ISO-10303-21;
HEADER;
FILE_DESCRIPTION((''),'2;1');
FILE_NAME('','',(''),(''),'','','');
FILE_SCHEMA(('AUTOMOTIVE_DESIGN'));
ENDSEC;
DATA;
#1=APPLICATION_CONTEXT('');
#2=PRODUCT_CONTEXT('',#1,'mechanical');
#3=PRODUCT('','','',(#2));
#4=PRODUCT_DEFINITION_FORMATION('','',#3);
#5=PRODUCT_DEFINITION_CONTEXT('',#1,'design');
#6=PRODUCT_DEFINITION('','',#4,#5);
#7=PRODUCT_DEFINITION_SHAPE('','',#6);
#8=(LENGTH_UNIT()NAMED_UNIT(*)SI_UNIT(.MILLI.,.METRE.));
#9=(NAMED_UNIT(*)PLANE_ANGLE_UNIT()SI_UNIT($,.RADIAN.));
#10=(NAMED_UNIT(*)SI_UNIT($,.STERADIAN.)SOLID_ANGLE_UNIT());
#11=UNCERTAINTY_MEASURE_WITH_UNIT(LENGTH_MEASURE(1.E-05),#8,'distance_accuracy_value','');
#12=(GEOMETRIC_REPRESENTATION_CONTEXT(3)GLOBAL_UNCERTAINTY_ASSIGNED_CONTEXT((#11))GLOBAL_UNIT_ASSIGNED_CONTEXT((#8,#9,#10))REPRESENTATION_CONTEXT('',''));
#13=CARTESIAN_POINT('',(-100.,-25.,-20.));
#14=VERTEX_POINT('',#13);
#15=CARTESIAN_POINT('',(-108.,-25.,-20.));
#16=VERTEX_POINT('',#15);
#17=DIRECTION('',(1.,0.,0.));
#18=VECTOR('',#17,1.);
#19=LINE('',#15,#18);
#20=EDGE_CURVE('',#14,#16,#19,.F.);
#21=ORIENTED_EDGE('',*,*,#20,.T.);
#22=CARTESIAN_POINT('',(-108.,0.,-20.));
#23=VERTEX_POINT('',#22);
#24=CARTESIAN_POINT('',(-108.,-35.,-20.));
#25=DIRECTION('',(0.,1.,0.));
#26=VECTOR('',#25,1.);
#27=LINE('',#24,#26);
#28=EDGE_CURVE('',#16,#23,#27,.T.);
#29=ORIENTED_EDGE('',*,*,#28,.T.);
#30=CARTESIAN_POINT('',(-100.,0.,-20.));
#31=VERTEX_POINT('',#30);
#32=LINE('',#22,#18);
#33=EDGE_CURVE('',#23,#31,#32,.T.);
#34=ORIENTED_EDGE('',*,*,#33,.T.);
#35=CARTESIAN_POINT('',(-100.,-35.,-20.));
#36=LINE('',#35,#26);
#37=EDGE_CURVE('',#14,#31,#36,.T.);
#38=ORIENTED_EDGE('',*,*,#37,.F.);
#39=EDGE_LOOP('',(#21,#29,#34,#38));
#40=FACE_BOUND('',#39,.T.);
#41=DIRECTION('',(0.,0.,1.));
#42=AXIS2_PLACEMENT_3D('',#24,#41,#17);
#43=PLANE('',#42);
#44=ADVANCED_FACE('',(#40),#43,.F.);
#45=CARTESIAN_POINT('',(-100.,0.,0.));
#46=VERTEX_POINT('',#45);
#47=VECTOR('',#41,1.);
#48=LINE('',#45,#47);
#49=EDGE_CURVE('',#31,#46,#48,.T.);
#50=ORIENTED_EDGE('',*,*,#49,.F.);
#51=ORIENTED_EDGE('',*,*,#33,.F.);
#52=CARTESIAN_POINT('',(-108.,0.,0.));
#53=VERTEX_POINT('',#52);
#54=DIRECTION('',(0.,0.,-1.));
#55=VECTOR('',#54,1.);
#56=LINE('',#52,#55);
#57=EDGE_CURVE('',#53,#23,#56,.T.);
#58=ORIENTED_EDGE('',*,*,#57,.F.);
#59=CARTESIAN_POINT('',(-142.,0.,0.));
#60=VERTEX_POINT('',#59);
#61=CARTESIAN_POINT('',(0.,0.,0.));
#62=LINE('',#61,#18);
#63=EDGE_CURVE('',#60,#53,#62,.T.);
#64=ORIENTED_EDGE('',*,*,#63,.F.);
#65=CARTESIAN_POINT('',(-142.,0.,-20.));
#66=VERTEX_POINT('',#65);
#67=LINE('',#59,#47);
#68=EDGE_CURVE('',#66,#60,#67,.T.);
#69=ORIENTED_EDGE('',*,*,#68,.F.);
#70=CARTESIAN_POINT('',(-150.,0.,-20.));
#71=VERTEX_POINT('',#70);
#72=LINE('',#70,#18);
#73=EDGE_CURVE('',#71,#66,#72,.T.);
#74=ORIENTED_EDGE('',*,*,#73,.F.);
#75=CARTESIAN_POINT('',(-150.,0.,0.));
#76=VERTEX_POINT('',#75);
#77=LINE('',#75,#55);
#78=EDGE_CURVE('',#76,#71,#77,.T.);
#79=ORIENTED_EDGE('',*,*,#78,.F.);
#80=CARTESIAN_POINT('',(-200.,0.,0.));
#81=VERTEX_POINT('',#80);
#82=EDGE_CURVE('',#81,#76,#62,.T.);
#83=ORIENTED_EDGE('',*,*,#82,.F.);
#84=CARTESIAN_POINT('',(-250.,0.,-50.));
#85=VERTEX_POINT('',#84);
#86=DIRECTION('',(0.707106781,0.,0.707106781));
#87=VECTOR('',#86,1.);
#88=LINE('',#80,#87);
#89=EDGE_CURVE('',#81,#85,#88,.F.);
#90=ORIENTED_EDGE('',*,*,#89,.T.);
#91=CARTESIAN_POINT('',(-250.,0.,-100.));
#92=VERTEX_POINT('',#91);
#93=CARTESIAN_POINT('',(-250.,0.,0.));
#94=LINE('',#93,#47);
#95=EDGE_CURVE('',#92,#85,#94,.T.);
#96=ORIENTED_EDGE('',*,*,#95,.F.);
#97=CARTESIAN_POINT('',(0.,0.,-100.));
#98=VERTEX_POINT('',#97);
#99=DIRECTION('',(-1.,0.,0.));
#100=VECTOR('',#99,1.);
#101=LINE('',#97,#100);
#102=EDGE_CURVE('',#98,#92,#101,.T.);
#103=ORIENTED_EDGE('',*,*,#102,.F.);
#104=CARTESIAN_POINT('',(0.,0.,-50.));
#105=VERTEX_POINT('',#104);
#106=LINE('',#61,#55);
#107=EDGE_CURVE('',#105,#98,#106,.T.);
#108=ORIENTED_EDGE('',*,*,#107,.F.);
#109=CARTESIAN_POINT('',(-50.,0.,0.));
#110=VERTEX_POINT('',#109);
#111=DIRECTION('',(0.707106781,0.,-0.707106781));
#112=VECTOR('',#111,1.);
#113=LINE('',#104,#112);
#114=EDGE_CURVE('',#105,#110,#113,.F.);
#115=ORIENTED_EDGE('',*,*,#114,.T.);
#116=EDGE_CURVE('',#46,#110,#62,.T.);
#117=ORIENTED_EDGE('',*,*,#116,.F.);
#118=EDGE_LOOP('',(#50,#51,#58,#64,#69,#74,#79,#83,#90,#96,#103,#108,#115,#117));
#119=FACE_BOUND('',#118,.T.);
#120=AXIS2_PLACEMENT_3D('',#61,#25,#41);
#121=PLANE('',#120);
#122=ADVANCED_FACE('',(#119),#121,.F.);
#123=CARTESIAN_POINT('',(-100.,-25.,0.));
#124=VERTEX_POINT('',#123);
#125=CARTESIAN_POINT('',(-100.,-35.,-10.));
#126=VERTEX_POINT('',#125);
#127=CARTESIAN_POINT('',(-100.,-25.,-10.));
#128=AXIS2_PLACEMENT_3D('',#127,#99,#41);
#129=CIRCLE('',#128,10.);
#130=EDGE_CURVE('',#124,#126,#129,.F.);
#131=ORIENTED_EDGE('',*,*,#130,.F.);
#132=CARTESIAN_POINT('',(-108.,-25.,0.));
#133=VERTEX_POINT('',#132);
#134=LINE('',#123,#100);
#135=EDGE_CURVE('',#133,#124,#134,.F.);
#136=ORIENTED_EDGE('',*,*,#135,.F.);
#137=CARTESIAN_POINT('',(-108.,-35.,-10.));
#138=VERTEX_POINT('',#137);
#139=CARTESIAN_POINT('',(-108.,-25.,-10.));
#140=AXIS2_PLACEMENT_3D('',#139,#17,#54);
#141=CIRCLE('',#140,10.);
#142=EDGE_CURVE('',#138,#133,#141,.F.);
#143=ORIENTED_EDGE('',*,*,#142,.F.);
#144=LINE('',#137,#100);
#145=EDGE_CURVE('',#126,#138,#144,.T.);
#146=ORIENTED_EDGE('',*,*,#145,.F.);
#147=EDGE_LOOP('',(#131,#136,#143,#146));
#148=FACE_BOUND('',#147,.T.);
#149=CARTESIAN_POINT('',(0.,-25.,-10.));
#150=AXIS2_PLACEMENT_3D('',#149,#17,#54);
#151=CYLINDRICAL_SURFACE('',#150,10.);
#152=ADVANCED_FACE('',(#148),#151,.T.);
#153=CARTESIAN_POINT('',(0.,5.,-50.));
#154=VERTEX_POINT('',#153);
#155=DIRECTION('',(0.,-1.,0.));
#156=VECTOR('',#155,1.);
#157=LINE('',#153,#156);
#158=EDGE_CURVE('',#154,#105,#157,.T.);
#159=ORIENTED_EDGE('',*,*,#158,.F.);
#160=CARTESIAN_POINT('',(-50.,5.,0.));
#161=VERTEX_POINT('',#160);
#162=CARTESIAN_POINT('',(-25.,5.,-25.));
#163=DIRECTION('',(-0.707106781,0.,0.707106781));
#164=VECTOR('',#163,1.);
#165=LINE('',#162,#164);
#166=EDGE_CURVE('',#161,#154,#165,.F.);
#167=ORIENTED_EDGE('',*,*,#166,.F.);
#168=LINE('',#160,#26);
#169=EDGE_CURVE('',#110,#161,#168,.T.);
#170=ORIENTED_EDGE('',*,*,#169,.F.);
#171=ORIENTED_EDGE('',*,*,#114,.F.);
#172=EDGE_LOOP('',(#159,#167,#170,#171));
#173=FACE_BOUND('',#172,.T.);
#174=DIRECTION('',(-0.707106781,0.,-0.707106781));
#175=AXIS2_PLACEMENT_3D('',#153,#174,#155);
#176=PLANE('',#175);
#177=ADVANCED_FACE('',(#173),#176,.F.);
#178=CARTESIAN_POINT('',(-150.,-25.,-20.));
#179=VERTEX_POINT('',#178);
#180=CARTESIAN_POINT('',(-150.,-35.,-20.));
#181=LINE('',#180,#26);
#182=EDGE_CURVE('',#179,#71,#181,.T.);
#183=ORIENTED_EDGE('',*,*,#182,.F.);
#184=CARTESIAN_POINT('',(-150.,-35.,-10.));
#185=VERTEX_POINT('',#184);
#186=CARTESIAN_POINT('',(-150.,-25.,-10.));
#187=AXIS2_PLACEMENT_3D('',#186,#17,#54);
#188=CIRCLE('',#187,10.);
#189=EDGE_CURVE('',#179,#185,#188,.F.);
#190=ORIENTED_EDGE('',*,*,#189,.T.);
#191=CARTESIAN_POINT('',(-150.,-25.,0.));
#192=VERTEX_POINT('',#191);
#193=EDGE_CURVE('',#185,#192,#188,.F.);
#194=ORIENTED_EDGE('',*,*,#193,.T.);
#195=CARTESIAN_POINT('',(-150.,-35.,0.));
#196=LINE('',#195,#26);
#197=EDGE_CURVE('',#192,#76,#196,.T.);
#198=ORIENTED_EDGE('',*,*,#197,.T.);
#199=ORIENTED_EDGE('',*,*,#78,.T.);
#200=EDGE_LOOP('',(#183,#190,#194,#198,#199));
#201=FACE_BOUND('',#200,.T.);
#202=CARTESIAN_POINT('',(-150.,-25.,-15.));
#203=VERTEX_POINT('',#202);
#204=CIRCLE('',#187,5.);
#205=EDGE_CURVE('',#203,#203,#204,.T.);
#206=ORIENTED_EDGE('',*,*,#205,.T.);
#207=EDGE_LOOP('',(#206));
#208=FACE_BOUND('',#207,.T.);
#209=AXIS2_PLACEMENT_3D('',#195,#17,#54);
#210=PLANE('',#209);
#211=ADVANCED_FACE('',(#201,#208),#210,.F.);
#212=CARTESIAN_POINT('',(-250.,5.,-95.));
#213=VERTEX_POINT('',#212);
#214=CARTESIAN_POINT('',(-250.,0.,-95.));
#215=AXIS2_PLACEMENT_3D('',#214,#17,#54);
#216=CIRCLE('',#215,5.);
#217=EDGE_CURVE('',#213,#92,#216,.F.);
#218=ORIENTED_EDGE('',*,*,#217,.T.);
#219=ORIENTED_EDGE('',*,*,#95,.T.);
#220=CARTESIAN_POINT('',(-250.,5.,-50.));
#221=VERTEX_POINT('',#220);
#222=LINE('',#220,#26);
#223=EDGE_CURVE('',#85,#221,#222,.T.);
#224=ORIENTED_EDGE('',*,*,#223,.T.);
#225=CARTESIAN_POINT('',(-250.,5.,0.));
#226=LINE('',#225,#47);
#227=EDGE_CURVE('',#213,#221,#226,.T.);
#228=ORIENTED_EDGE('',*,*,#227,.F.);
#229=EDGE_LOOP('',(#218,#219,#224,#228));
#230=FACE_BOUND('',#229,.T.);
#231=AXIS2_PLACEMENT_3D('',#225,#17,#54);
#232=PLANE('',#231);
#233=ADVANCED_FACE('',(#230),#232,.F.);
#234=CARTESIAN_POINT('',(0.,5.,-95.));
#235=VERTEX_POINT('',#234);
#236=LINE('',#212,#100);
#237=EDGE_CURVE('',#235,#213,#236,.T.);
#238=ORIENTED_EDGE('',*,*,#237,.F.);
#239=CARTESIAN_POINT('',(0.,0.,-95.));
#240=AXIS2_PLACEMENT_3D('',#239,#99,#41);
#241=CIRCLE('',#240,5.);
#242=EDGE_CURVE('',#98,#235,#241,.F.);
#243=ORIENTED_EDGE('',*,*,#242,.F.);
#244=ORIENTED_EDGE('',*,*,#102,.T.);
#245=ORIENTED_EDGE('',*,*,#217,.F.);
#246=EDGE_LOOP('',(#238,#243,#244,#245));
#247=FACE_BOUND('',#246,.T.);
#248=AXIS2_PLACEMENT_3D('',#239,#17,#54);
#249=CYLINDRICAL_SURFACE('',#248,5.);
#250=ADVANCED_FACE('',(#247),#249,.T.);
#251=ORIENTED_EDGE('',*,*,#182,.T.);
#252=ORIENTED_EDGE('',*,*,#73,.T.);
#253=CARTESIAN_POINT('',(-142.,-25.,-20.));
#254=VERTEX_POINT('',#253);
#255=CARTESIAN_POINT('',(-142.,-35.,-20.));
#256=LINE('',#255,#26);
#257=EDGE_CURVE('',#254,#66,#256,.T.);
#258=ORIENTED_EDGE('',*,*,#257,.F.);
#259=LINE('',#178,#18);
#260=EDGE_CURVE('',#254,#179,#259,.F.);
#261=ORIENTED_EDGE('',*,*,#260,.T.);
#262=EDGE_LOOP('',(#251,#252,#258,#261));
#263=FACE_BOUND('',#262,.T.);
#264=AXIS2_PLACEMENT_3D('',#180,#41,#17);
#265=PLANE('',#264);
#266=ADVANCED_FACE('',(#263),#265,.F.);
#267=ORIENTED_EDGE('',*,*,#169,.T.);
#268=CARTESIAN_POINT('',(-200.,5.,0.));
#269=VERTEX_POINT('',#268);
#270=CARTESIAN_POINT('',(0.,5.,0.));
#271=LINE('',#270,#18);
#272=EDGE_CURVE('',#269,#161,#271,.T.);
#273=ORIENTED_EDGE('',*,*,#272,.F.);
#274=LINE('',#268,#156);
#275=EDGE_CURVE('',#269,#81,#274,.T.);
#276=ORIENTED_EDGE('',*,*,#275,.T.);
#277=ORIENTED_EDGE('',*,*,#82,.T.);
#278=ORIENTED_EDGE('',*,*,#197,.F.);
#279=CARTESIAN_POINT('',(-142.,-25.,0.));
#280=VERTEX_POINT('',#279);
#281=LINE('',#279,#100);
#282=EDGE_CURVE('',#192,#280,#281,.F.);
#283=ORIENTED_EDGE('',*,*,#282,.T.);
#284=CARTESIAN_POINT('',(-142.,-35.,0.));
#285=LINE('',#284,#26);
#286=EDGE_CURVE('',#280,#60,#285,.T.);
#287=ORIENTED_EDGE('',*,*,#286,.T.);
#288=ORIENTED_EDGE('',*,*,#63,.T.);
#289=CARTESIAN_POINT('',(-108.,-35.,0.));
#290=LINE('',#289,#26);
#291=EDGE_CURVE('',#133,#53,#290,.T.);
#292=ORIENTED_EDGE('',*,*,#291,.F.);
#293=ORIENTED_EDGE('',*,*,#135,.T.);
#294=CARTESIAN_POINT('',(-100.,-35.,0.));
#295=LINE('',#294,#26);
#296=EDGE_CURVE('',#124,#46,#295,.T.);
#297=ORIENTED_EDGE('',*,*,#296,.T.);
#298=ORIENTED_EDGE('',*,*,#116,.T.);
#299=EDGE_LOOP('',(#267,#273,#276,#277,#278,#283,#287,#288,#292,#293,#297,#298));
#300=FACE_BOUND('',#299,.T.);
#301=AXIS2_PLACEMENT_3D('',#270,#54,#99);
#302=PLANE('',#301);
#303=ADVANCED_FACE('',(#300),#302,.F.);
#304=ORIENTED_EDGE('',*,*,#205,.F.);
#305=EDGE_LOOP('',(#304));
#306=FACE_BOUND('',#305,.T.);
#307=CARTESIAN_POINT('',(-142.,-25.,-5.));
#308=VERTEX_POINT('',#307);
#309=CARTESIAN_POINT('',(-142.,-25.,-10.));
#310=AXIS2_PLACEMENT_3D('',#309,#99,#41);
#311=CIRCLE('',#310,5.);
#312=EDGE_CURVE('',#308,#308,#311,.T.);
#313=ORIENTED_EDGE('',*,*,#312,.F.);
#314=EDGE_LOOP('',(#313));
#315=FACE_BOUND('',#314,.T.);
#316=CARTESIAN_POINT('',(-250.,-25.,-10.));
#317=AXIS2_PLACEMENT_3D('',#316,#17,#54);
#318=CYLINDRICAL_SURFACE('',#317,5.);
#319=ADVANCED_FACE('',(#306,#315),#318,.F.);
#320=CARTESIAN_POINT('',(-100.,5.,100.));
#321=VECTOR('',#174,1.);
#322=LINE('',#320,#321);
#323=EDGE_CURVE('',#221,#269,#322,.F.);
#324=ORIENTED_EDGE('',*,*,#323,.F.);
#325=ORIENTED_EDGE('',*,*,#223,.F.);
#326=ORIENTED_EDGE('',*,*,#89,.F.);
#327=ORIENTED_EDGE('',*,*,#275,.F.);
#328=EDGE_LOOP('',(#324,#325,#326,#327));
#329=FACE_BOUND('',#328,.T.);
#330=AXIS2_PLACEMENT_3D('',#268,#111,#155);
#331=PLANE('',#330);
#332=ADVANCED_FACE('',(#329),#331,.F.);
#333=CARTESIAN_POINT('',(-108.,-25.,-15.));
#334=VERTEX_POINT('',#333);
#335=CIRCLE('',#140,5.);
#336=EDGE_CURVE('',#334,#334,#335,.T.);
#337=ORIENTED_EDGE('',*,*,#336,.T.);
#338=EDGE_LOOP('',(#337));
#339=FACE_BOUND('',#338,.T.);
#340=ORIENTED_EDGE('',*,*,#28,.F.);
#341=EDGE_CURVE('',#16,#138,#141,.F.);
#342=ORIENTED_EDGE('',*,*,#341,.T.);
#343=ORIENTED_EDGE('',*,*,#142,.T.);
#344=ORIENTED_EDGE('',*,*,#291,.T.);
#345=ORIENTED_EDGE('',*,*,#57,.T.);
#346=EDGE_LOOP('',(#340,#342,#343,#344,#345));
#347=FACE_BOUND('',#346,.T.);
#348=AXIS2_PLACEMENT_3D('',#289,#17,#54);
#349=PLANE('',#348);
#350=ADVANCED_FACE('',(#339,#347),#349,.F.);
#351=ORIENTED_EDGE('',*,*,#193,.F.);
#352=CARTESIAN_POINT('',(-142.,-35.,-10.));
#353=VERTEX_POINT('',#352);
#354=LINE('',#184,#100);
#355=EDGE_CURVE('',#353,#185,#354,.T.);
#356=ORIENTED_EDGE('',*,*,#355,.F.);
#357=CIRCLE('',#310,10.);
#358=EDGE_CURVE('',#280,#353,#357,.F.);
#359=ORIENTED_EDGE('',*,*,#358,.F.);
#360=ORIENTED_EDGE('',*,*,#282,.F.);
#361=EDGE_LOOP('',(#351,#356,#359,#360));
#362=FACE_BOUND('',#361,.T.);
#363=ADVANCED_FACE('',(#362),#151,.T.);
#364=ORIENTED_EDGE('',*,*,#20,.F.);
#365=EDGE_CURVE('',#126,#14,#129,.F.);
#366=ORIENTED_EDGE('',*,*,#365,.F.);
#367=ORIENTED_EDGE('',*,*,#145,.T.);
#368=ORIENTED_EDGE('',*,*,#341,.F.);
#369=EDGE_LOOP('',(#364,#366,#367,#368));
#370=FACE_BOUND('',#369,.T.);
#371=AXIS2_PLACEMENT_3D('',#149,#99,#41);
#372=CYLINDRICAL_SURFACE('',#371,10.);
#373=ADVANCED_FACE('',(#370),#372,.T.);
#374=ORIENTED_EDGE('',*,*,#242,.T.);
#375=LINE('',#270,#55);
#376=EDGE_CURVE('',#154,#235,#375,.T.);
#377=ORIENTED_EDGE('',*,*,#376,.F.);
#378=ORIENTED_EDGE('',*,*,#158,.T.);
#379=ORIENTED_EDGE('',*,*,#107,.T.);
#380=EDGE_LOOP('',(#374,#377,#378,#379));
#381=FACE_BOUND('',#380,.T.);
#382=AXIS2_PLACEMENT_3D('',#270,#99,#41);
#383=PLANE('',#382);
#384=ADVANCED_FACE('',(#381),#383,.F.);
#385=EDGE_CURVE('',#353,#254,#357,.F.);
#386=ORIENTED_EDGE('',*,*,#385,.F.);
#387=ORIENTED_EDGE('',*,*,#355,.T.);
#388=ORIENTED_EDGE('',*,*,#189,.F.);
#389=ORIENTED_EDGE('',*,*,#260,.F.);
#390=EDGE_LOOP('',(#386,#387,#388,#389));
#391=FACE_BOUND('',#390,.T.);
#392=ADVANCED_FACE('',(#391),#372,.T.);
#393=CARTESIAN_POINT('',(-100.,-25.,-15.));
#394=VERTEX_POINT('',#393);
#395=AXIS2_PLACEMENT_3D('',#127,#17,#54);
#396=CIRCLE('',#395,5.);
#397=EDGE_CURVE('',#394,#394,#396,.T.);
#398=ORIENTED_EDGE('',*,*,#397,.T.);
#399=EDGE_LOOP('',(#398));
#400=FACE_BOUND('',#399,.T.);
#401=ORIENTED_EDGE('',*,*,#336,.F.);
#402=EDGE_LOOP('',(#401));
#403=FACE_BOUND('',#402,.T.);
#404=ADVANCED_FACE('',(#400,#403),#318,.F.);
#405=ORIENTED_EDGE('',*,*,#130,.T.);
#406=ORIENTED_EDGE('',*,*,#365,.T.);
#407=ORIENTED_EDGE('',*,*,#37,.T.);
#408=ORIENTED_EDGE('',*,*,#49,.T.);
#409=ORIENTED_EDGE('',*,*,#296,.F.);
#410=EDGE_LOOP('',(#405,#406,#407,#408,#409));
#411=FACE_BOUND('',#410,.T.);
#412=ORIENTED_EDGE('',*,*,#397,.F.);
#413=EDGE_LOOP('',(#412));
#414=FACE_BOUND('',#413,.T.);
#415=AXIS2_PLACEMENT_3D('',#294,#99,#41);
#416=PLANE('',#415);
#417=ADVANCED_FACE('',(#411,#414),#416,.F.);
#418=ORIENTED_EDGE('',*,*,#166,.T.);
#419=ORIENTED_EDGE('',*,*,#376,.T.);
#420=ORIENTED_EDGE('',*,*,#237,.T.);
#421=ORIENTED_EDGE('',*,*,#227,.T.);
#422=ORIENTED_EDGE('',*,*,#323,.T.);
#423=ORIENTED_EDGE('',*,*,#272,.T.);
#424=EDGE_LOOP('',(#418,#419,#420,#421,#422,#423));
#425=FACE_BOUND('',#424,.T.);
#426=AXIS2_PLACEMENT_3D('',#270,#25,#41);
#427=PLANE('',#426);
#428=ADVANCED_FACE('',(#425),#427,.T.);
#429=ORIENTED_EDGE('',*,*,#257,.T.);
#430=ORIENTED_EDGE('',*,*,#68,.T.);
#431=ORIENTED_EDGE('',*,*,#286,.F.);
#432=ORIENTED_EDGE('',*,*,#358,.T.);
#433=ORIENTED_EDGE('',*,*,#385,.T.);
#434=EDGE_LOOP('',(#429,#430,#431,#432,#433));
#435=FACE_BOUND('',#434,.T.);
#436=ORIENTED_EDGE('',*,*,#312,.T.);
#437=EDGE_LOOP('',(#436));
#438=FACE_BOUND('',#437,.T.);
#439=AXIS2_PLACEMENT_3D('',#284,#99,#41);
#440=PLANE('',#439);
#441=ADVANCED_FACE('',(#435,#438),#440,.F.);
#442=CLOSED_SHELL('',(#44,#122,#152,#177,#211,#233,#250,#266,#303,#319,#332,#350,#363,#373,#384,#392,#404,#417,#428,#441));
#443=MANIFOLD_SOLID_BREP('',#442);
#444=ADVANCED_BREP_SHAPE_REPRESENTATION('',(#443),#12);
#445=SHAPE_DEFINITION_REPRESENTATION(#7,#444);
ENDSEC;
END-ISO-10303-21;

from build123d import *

# Parameters (mm, degrees)
SKETCH1_W           = 250
SKETCH1_H           = 100
BOSS_EXTRUDE1_DEPTH = 5
CHAMFER2_SIZE       = 50
FILLET1_R           = 5
SKETCH2_W           = 8
SKETCH2_H           = 20
BOSS_EXTRUDE2_DEPTH = 35
SKETCH4_R           = 5
CUT_EXTRUDE1_DEPTH  = 184.643676722
FILLET2_R           = 10


with BuildPart() as part:
    # Sketch1 → Boss-Extrude1 (new body)
    with BuildSketch(Plane(origin=(0, 0, 0), x_dir=(1, 0, 0), z_dir=(0, 1, 0))):
        with Locations((-125, 50)):
            Rectangle(SKETCH1_W, SKETCH1_H)
    extrude(amount=BOSS_EXTRUDE1_DEPTH)

    # Chamfer2
    chamfer2_edges = [part.edges().sort_by_distance(p)[0] for p in [
        (0, 2.5, 0),
        (-250, 2.5, 0),
    ]]
    chamfer(chamfer2_edges, length=CHAMFER2_SIZE)

    # Fillet1
    fillet1_edges = [part.edges().sort_by_distance(p)[0] for p in [
        (-125, 5, -100),
    ]]
    fillet(fillet1_edges, radius=FILLET1_R - 0.0001)  # a hair under: the kernel refuses the full size

    # Sketch2 → Boss-Extrude2 (add)
    with BuildSketch(Plane.XZ):
        with Locations((-146, -10)):
            Rectangle(SKETCH2_W, SKETCH2_H)
        with Locations((-104, -10)):
            Rectangle(SKETCH2_W, SKETCH2_H)
    extrude(amount=BOSS_EXTRUDE2_DEPTH)

    # Sketch4 → Cut-Extrude1 (cut, through all)
    with BuildSketch(Plane(origin=(-100, 0, 0), x_dir=(0, 0, -1), z_dir=(1, 0, 0))):
        with Locations((10, -25)):
            Circle(SKETCH4_R)
    extrude(amount=-CUT_EXTRUDE1_DEPTH, mode=Mode.SUBTRACT)

    # Fillet2
    fillet2_edges = [part.edges().sort_by_distance(p)[0] for p in [
        (-104, -35, -20),
        (-146, -35, -20),
        (-146, -35, 0),
        (-104, -35, 0),
    ]]
    fillet(fillet2_edges, radius=FILLET2_R - 0.0001)  # a hair under: the kernel refuses the full size


solid = part.part
